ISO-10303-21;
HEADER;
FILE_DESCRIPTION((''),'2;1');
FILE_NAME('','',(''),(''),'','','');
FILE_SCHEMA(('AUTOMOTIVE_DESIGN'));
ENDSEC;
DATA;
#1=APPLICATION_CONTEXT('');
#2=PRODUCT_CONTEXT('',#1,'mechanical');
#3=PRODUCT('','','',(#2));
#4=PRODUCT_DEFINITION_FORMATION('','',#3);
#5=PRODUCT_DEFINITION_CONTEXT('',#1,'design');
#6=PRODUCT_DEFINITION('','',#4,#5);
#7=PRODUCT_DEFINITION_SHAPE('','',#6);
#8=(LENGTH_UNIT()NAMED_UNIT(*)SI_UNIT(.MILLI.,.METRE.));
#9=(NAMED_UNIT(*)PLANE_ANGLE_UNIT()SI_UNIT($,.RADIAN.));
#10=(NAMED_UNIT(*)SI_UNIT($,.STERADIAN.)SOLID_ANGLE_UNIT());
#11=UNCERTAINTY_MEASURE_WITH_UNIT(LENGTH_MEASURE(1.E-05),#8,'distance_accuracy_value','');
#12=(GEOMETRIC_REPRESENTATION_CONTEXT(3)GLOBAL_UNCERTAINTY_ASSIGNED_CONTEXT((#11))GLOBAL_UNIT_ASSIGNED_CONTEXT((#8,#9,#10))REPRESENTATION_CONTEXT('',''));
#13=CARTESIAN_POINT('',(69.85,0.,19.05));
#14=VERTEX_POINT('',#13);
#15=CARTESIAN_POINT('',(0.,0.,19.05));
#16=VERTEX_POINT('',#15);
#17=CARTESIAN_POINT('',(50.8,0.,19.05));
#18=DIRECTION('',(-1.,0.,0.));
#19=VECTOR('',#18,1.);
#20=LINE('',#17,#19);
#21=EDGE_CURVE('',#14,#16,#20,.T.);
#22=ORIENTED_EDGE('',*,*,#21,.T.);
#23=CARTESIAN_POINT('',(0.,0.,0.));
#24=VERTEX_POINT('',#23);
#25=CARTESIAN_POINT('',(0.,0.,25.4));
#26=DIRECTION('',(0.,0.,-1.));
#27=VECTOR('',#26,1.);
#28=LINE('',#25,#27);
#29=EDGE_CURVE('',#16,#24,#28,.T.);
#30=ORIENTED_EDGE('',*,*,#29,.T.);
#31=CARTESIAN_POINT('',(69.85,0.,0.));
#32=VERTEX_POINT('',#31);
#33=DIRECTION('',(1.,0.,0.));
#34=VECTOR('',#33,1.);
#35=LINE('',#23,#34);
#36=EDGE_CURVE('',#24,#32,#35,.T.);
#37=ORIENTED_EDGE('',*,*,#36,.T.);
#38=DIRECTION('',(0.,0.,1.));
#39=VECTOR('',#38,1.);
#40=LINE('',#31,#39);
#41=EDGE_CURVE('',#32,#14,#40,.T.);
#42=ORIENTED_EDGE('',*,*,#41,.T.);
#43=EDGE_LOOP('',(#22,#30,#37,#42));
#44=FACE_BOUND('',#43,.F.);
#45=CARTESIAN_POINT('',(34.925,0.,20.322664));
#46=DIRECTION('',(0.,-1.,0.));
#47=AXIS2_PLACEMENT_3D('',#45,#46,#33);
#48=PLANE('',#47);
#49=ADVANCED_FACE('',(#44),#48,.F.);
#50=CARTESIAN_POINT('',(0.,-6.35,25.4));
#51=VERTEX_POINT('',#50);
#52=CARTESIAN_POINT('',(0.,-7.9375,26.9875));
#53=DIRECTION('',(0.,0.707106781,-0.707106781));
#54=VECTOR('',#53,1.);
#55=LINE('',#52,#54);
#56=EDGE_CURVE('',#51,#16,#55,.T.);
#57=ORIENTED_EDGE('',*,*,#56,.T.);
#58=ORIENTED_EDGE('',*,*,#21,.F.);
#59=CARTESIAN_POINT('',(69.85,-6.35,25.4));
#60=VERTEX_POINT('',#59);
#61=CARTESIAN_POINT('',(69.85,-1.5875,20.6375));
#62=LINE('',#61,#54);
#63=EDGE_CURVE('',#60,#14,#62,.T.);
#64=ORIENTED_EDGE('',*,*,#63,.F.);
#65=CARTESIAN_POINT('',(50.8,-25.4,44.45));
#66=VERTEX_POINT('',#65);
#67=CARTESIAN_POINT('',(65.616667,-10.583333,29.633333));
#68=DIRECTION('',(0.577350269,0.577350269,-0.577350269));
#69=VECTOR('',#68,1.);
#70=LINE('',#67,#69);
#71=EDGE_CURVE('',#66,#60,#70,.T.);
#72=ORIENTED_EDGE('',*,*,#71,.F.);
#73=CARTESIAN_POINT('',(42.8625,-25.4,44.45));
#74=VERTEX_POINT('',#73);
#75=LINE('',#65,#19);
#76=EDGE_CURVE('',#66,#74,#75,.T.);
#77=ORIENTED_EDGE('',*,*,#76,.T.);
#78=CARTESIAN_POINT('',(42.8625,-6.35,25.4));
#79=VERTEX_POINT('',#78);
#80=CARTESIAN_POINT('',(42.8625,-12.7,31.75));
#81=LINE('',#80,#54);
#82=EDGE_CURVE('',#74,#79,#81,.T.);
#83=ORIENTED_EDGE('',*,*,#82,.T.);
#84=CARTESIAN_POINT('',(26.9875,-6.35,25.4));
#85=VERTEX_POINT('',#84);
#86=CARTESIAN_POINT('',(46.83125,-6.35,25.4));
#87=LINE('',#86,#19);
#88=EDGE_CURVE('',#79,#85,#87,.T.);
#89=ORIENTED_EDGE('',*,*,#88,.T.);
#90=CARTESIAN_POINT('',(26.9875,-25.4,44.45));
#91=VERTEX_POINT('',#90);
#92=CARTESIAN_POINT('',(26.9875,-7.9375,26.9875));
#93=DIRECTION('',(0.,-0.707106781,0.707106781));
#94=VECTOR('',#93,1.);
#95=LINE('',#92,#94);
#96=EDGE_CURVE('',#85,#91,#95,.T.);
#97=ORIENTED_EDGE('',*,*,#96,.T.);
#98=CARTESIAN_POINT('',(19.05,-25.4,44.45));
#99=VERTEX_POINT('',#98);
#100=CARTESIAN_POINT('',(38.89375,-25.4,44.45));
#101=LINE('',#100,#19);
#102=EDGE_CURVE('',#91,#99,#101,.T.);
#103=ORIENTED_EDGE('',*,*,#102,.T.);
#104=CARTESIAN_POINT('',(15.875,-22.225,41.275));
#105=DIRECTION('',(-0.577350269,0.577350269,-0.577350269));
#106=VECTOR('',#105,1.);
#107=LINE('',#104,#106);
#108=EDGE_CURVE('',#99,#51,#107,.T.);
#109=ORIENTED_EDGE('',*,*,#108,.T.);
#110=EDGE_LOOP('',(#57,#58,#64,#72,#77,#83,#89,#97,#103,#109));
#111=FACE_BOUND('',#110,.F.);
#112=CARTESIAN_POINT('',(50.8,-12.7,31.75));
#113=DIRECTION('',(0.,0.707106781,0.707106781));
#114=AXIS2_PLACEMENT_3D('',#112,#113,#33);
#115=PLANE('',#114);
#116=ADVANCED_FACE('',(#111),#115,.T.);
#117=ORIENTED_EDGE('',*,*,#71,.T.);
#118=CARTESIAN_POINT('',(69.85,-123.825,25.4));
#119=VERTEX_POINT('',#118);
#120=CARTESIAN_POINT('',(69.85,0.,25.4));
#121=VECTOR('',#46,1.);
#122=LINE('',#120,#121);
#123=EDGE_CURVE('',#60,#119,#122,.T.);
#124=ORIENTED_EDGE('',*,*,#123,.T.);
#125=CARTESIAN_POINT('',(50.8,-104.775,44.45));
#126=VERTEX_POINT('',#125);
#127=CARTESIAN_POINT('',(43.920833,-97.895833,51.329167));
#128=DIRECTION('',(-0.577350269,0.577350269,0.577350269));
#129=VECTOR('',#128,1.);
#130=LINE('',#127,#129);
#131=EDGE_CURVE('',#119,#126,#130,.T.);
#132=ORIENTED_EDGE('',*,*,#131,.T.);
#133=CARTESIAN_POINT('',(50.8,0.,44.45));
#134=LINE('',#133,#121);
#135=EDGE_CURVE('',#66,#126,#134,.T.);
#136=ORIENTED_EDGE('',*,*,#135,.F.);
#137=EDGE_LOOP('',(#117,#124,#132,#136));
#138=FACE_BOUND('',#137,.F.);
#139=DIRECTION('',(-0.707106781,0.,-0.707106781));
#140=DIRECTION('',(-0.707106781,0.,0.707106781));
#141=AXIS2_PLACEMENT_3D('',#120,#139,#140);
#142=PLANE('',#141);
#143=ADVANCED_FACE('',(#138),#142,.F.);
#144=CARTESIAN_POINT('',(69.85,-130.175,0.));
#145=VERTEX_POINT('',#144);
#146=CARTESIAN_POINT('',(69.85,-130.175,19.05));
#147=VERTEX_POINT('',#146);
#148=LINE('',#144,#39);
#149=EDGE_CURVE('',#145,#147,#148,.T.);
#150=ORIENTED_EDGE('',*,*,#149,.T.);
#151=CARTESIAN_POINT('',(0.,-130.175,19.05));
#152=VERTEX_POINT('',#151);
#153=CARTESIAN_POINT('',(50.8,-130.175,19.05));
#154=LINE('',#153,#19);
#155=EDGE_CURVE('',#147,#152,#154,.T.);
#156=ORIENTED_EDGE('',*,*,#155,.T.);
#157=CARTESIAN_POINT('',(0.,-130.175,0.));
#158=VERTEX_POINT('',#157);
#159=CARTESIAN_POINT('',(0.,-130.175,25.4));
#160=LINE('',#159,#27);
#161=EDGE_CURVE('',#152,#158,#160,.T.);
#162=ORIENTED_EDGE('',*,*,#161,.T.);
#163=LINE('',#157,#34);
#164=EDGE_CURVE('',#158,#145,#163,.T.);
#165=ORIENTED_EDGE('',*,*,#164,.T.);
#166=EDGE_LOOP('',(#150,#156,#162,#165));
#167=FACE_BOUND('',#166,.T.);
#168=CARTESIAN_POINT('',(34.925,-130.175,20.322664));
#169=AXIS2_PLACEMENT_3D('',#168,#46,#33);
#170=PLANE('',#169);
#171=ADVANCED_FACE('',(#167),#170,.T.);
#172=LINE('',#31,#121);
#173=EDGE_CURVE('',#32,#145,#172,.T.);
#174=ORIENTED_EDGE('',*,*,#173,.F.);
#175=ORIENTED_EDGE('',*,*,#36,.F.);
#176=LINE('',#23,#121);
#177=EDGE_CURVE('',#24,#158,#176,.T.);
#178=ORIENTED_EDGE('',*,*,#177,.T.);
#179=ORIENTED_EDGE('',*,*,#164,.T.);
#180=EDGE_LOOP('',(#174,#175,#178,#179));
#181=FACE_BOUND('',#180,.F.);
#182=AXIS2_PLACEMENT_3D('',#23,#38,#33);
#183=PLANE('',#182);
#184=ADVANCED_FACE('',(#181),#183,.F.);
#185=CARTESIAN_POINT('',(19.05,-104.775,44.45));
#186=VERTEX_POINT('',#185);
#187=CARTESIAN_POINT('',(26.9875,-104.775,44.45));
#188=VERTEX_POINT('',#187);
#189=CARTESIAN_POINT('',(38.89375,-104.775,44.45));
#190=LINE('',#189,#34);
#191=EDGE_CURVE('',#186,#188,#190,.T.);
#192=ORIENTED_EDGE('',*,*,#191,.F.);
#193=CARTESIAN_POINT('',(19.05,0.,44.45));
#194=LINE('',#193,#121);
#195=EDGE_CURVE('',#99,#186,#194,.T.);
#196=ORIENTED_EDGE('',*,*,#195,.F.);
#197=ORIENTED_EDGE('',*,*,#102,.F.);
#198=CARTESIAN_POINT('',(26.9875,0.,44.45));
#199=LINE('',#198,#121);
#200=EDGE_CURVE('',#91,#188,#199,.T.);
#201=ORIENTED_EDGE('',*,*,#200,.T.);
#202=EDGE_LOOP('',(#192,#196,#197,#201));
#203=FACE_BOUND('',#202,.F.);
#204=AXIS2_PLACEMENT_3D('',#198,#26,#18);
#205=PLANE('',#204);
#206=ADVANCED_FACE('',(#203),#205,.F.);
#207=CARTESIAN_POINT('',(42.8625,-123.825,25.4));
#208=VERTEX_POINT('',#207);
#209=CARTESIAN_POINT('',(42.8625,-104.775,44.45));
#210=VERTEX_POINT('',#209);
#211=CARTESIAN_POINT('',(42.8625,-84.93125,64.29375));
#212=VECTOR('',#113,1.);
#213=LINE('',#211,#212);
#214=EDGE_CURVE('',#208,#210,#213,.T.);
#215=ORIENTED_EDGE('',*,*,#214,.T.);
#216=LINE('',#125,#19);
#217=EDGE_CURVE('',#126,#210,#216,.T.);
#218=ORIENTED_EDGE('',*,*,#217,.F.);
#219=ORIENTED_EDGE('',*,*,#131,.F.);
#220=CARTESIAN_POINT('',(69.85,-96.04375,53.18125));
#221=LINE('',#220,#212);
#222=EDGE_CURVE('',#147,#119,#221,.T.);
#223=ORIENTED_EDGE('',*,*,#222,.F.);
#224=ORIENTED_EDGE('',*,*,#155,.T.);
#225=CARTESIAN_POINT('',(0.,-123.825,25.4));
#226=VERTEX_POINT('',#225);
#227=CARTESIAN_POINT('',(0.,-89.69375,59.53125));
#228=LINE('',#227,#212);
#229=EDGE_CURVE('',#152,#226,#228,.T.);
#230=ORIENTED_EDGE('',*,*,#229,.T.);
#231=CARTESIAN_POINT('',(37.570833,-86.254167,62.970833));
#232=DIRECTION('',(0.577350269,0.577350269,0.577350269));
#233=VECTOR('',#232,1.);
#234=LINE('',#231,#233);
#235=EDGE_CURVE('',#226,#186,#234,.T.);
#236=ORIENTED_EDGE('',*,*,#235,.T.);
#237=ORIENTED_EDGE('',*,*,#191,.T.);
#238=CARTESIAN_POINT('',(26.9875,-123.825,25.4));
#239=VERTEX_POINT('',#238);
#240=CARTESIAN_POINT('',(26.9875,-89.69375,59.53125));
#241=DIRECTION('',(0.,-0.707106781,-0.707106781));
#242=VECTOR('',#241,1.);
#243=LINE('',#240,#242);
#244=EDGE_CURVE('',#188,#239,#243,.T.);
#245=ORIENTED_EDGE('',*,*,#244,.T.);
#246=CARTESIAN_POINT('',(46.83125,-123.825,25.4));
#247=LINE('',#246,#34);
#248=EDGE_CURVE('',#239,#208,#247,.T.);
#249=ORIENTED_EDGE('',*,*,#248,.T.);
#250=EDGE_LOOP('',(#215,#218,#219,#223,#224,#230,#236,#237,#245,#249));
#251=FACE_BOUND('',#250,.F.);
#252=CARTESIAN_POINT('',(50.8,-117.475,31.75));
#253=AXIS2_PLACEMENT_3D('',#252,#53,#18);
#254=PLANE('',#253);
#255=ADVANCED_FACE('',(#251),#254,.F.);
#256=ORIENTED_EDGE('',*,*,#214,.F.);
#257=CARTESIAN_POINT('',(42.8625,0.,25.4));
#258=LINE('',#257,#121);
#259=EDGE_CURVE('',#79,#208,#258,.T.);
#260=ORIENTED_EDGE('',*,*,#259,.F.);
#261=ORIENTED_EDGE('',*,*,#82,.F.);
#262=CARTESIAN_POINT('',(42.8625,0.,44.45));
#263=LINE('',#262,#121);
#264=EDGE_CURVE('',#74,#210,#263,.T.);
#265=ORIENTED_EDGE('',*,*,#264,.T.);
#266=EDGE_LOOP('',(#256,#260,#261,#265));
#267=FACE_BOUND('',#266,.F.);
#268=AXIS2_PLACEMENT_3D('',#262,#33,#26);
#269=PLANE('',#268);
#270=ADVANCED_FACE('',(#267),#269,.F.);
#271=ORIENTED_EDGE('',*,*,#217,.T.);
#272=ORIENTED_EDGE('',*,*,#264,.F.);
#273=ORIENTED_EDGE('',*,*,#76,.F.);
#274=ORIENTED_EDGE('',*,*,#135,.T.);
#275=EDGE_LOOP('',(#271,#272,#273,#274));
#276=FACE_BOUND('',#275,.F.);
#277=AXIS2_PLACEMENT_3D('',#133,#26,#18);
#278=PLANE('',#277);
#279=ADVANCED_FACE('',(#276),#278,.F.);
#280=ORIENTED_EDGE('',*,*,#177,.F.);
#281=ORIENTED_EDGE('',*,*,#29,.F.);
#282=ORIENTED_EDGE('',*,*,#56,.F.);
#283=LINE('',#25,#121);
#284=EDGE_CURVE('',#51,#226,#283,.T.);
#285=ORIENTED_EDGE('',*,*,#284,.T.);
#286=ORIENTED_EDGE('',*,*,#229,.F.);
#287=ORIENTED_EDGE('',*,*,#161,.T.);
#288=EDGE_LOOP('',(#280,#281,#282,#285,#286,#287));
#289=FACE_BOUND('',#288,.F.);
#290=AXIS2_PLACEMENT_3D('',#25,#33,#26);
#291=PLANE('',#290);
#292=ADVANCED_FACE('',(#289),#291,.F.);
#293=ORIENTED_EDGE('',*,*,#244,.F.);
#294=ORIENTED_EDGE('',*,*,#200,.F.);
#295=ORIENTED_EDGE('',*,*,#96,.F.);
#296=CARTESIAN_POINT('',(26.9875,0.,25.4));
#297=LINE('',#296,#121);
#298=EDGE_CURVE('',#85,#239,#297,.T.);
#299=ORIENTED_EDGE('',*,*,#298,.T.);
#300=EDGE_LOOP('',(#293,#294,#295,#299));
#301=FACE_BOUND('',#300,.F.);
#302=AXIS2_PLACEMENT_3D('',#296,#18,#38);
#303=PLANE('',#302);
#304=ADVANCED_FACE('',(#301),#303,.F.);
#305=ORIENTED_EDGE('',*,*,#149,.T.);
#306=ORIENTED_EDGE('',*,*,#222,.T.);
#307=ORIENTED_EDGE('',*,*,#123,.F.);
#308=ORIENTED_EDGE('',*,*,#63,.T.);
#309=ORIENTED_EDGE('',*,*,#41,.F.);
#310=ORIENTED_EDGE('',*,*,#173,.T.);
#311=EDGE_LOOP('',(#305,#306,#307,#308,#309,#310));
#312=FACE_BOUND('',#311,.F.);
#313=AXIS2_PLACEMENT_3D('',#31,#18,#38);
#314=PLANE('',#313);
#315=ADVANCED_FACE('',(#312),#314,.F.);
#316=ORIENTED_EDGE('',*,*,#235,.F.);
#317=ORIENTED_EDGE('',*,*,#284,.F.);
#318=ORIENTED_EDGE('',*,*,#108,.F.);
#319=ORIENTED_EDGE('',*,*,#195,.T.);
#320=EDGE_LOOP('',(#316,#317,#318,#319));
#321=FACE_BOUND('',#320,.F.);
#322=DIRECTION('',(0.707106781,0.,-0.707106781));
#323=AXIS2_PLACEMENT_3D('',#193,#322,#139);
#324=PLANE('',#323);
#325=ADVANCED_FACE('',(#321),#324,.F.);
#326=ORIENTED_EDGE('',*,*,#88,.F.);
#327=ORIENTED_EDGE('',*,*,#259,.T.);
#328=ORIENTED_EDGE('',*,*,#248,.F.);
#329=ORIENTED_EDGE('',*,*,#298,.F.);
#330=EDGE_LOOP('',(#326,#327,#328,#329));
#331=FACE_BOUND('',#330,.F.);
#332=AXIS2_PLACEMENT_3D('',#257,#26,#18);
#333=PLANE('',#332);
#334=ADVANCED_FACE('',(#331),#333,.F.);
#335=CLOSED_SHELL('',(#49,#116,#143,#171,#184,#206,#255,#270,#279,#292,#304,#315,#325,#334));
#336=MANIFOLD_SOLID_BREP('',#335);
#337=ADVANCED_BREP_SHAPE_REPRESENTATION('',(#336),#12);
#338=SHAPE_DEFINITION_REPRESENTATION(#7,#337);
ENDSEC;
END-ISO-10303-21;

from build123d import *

# Parameters (mm, degrees)
F1_DEPTH   = 130.175
F2_C1_SIZE = 25.4
F2_C2_SIZE = 25.4


with BuildPart() as f1:
    # F0 (on Front) → F1 (new body)
    with BuildSketch(Plane.XZ):
        Polygon((0, 25.4), (0, 0), (69.85, 0), (69.85, 25.4), (50.8, 44.45), (42.8625, 44.45), (42.8625, 25.4), (26.9875, 25.4), (26.9875, 44.45), (19.05, 44.45), align=None)
    extrude(amount=F1_DEPTH)

    # F2: chamfer of 25.4 on 4 edges, made by hand

    # F2_c1
    f2_c1_edges = [f1.edges().sort_by_distance(p)[0] for p in [
        (46.83125, 0, 44.45),
    ]]
    chamfer(f2_c1_edges, length=F2_C1_SIZE)

    # F2_c2
    f2_c2_edges = [f1.edges().sort_by_distance(p)[0] for p in [
        (46.83125, -130.175, 44.45),
    ]]
    chamfer(f2_c2_edges, length=F2_C2_SIZE)


solid = f1.part
